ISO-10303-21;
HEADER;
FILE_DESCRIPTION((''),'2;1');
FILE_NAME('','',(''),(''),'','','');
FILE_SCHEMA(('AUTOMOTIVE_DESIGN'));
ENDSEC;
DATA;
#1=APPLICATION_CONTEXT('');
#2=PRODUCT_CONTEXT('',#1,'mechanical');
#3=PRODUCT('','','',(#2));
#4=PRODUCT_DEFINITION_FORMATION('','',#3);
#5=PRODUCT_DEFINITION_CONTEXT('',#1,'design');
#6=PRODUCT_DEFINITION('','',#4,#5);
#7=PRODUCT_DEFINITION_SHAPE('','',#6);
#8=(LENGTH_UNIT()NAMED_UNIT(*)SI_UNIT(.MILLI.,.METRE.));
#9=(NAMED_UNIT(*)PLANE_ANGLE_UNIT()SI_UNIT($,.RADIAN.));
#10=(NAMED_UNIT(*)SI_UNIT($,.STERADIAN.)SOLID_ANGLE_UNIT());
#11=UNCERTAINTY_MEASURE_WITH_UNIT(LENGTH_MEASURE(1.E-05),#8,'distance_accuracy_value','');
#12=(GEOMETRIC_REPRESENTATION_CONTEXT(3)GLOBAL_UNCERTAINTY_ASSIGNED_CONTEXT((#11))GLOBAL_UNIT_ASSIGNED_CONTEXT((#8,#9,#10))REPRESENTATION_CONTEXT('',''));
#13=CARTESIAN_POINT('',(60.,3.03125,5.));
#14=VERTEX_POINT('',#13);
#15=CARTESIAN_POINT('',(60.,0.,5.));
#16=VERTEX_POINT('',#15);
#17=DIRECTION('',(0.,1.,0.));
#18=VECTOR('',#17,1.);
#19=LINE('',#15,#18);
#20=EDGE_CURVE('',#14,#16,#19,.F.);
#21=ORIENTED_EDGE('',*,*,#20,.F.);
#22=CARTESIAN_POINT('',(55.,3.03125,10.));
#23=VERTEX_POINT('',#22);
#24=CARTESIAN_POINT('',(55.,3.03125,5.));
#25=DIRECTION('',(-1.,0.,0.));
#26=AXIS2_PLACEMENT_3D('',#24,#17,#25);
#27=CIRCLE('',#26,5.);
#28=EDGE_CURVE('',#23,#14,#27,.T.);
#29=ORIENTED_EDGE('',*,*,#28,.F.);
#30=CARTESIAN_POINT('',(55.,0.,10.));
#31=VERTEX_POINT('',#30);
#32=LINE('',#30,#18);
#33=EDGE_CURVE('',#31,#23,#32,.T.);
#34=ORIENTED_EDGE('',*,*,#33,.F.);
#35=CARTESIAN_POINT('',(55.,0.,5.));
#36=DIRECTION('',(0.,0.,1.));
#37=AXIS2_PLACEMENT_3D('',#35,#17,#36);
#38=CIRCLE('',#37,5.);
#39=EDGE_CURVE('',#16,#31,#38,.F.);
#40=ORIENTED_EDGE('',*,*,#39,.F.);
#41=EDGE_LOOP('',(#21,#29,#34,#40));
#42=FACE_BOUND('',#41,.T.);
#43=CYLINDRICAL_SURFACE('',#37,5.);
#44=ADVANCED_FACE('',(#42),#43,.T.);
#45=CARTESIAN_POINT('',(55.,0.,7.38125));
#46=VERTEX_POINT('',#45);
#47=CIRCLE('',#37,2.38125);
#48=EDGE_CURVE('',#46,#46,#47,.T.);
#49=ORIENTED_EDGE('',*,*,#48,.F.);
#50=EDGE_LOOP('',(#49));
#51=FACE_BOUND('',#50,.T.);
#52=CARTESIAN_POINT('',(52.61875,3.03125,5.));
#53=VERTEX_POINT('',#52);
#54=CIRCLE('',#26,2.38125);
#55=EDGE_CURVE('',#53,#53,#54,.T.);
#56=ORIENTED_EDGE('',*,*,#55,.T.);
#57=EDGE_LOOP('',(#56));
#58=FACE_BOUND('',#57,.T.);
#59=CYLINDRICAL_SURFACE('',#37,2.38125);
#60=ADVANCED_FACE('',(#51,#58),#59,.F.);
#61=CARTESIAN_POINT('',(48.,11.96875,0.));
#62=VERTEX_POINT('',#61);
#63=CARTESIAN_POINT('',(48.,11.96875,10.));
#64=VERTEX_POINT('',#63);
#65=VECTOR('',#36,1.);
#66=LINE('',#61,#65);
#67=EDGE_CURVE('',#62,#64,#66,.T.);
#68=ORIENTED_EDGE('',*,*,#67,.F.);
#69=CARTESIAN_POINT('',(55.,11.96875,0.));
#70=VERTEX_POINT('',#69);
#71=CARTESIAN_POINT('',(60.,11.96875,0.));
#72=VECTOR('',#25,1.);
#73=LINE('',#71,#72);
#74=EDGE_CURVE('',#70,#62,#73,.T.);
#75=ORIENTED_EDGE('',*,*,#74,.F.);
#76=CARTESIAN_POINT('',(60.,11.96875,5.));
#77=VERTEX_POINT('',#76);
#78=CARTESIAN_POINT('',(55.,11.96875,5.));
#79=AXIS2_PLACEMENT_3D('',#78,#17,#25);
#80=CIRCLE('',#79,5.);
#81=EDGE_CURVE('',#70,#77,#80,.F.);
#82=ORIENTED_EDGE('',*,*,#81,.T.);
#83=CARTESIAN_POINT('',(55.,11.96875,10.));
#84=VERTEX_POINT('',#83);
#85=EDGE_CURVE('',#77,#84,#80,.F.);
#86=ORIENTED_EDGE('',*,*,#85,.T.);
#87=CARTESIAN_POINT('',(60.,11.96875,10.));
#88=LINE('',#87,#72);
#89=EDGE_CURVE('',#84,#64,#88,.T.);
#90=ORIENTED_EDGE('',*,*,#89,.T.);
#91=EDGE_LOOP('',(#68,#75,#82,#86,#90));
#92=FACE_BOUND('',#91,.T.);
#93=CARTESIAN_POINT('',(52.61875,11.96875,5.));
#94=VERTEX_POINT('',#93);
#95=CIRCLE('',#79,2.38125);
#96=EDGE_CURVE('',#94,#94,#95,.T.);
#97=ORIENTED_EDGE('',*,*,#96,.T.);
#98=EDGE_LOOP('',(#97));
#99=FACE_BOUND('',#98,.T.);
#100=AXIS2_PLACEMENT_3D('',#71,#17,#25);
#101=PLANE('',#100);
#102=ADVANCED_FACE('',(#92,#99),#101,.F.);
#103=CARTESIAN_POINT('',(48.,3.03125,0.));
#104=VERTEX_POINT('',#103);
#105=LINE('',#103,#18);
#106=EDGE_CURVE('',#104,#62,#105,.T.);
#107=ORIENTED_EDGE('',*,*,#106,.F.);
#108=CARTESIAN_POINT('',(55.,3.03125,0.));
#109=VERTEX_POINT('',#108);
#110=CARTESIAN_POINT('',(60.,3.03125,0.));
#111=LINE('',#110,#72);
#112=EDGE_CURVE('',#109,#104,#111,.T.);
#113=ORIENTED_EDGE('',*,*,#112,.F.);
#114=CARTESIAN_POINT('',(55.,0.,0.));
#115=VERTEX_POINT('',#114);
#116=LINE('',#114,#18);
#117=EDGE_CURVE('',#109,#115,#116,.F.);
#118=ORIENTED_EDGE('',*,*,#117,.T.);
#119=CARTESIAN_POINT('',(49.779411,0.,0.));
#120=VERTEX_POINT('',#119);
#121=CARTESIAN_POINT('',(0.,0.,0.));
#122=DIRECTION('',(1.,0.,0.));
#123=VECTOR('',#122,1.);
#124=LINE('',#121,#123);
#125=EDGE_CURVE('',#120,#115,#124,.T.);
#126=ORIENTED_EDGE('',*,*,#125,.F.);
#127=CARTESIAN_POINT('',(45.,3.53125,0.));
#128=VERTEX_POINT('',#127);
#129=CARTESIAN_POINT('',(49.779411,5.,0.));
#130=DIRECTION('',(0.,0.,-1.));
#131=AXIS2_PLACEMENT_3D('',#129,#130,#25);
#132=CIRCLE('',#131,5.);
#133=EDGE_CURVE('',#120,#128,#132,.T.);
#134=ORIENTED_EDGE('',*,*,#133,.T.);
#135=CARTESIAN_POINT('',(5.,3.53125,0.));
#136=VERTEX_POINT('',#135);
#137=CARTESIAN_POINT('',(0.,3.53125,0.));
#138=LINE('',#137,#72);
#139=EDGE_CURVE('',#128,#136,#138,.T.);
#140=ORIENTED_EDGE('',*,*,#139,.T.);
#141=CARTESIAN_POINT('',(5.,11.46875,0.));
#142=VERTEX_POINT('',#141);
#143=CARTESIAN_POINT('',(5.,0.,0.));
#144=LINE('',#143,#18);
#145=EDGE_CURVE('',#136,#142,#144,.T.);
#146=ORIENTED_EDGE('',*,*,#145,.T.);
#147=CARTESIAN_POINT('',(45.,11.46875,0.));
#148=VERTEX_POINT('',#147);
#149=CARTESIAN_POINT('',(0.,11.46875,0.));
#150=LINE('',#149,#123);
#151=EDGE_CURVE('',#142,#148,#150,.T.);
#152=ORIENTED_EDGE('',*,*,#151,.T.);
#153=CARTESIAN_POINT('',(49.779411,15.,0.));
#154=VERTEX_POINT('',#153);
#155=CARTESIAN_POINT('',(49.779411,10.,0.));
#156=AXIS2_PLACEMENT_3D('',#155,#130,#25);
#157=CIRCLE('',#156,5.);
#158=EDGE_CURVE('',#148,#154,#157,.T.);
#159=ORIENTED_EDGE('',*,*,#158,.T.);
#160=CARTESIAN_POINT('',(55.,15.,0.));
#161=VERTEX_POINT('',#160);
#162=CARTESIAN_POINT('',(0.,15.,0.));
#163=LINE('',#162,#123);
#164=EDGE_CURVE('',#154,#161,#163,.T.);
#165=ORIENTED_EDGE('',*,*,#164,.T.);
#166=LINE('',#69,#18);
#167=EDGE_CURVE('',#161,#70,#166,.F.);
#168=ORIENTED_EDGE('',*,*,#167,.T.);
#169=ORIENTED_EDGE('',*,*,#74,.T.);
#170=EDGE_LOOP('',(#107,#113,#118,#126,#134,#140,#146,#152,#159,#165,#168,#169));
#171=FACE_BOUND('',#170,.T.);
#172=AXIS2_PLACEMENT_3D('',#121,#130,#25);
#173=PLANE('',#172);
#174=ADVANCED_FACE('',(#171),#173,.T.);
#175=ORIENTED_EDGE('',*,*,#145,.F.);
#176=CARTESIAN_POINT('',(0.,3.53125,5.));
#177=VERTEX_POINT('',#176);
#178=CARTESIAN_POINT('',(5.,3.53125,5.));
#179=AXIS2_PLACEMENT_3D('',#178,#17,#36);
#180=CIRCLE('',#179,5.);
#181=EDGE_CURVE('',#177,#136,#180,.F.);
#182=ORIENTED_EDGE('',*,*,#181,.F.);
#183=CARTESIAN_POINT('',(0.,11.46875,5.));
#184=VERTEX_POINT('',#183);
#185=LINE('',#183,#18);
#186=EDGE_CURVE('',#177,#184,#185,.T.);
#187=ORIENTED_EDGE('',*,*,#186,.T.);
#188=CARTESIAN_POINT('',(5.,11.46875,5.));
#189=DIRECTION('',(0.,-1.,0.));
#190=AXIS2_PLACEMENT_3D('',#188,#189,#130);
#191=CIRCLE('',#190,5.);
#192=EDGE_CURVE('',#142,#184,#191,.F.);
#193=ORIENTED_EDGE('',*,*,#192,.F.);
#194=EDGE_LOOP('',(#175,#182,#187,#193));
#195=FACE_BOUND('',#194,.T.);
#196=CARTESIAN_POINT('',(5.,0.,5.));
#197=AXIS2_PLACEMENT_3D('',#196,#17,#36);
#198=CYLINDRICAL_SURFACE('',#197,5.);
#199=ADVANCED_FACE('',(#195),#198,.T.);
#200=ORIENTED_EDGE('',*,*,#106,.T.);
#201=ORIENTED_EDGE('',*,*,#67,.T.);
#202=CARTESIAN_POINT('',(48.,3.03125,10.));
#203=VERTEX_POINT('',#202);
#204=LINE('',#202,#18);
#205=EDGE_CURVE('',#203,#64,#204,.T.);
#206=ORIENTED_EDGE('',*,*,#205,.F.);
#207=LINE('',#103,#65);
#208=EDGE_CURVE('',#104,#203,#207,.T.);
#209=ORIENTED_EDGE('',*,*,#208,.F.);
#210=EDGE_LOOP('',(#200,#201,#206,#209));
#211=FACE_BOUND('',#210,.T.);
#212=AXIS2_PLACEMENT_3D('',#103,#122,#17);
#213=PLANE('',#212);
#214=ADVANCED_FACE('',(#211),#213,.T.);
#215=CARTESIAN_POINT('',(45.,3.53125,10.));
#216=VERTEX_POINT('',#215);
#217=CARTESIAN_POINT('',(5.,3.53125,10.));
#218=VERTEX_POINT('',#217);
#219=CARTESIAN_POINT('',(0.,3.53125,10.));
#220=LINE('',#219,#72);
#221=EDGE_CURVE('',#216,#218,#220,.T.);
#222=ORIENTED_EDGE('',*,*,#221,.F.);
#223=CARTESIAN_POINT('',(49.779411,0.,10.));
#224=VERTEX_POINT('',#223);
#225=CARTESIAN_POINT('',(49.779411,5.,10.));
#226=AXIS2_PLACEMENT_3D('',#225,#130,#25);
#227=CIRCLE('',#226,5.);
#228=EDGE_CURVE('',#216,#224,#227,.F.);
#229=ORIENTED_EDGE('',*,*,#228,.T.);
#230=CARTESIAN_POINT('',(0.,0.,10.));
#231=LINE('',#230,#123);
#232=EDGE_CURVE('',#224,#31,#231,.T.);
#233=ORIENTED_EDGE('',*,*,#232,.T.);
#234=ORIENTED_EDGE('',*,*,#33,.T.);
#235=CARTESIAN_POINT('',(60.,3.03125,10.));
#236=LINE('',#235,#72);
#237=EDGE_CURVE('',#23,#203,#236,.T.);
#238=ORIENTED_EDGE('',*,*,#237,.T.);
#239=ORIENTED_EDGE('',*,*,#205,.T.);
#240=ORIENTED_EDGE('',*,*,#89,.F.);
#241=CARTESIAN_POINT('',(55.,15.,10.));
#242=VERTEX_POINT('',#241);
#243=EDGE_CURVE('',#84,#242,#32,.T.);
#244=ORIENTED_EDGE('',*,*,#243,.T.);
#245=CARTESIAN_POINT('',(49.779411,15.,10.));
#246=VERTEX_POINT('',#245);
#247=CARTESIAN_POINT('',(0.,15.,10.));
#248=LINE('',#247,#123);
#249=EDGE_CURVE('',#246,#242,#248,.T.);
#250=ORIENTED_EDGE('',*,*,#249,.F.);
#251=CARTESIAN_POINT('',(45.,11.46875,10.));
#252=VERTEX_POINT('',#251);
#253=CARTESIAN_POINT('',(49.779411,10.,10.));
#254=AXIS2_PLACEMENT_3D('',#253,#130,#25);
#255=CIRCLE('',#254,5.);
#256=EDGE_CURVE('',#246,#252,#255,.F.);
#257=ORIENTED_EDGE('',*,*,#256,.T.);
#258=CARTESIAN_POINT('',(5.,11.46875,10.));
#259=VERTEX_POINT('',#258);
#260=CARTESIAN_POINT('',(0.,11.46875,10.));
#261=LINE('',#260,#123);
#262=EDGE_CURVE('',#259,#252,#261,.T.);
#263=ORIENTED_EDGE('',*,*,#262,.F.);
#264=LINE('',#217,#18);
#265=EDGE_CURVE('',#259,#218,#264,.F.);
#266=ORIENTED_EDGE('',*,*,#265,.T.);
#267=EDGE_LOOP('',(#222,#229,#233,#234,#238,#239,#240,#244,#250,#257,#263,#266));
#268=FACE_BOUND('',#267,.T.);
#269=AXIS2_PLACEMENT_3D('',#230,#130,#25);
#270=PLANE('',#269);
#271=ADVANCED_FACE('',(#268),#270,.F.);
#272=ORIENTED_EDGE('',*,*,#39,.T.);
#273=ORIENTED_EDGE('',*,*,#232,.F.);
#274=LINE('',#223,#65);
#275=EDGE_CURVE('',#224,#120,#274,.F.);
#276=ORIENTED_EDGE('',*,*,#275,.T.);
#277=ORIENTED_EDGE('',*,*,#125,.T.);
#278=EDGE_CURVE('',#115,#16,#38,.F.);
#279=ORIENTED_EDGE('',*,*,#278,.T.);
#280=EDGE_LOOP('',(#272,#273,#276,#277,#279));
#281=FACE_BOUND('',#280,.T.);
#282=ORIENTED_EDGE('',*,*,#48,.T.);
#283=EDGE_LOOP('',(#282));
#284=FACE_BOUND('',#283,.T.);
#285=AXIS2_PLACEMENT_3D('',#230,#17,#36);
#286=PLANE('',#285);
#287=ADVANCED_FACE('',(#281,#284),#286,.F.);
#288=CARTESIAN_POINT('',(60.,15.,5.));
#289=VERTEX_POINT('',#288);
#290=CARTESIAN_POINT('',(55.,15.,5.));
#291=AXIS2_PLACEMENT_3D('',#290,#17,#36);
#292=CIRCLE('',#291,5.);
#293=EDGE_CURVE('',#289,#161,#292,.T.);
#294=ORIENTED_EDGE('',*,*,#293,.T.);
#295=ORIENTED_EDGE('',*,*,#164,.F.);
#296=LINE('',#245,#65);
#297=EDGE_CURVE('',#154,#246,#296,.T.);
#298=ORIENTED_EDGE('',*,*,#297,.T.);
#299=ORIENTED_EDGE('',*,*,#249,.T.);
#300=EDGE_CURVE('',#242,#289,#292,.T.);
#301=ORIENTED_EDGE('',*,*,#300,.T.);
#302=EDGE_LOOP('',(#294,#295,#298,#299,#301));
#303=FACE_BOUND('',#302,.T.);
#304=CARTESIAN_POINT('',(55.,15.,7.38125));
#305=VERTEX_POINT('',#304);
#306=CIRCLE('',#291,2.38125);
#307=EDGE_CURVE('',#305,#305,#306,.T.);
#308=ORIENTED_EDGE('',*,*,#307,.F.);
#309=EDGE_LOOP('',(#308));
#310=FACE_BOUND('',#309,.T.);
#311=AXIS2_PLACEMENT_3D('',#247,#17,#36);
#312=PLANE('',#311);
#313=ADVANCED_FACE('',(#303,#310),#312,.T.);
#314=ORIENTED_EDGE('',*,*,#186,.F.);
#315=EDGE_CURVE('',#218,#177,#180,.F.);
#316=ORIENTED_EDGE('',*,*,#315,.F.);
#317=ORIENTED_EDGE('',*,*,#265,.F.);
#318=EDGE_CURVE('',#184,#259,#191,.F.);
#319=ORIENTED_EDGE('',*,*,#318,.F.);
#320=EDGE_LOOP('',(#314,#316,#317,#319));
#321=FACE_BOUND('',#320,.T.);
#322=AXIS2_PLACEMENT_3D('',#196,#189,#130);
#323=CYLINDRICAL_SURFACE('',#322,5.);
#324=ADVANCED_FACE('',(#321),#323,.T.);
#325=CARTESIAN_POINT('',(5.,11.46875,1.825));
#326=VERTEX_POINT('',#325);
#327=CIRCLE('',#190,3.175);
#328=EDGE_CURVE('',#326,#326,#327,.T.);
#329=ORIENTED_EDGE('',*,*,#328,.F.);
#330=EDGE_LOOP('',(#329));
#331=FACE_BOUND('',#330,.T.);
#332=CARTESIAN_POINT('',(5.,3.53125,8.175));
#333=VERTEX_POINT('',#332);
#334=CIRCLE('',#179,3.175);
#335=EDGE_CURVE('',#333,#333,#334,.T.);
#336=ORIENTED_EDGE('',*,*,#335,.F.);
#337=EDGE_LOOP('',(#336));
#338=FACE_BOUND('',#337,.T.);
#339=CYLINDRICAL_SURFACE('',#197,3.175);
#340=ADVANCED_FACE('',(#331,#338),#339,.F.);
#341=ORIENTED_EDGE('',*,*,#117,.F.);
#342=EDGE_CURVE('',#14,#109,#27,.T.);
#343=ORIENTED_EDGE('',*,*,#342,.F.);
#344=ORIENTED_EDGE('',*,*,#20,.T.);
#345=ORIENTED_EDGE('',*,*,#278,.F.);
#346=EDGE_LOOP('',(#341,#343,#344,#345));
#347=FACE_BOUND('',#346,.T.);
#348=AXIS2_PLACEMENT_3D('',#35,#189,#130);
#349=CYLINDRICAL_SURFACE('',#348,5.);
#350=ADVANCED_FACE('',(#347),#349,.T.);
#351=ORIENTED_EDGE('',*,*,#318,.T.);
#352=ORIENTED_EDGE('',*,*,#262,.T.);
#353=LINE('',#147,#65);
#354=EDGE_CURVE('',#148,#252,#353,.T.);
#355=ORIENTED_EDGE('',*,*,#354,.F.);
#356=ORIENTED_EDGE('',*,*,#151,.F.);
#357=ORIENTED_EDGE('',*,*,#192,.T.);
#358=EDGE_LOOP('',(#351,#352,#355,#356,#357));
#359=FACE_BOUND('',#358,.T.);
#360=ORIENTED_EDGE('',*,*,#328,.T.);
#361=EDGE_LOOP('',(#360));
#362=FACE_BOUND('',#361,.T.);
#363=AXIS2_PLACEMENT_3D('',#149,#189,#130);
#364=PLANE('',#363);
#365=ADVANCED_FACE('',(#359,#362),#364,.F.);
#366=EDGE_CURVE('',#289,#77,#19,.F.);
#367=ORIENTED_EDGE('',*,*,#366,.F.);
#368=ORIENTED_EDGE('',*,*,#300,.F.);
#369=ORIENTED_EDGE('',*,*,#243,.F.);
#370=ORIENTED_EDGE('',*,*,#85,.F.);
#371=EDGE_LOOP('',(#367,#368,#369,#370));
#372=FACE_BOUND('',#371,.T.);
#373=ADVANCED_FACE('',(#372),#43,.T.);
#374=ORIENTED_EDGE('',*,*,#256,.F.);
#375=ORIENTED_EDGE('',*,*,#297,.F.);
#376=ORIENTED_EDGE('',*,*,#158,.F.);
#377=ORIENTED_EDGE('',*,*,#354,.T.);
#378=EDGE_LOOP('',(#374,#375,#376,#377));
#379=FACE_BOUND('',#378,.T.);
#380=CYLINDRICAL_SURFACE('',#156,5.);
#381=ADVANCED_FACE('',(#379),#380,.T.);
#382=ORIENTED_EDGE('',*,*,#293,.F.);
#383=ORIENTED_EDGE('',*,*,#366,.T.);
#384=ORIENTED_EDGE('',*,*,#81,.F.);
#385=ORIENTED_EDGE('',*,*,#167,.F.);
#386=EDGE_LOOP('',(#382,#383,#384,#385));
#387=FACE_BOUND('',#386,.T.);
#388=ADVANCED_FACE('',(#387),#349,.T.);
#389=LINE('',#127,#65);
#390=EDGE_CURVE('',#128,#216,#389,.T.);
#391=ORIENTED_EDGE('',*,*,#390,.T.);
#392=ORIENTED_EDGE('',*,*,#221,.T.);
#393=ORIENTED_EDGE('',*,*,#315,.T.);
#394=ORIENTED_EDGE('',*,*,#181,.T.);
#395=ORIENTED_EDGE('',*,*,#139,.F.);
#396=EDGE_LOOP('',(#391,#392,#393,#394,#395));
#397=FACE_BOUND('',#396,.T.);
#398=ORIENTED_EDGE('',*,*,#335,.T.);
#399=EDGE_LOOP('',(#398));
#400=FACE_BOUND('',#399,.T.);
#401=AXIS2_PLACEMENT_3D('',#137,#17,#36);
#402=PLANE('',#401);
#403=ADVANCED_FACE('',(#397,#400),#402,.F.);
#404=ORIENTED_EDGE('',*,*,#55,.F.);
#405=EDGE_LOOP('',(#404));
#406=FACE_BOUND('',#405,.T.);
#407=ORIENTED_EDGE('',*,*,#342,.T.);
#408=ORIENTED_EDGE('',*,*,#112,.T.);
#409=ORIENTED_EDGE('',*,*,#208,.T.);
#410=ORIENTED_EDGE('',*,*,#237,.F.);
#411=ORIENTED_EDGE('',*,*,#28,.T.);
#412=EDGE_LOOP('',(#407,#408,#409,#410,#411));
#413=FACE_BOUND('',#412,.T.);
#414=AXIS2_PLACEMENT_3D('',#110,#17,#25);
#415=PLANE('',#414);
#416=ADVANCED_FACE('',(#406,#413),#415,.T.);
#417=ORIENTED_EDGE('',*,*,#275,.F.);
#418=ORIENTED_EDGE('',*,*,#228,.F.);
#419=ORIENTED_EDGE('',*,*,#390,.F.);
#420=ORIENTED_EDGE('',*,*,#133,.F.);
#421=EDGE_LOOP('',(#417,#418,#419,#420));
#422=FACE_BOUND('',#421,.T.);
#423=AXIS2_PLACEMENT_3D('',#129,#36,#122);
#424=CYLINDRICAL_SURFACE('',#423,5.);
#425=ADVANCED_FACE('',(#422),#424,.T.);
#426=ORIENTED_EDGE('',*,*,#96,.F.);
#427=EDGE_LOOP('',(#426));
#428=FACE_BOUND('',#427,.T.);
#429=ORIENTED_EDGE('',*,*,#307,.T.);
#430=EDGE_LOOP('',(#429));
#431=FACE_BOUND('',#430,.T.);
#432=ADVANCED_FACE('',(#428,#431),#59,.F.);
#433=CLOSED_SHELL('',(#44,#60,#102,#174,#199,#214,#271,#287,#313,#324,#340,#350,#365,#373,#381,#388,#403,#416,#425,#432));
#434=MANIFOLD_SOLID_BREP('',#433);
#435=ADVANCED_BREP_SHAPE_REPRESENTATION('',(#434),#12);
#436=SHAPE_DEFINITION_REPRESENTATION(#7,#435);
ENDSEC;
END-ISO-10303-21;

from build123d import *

# Parameters (mm, degrees)
SKETCH1_W           = 60
SKETCH1_H           = 15
BOSS_EXTRUDE1_DEPTH = 10
SKETCH2_W           = 12
SKETCH2_H           = 8.9375
CUT_EXTRUDE1_DEPTH  = 63.649820431
SKETCH4_W           = 45
SKETCH4_H           = 3.53125
CUT_EXTRUDE3_DEPTH  = 63.649820431
FILLET1_R           = 5
FILLET2_R           = 5
SKETCH3_R           = 3.175
SKETCH3_R_2         = 2.38125
CUT_EXTRUDE2_DEPTH  = 63.649820431


# Some blends are built 0.0001 mm under size
with BuildPart() as part:
    # Sketch1 → Boss-Extrude1 (new body)
    with BuildSketch(Plane.XY):
        with Locations((30, 7.5)):
            Rectangle(SKETCH1_W, SKETCH1_H)
    extrude(amount=BOSS_EXTRUDE1_DEPTH)

    # Sketch2 → Cut-Extrude1 (cut, through all)
    with BuildSketch(Plane.XY.offset(10)):
        with Locations((54, 7.5)):
            Rectangle(SKETCH2_W, SKETCH2_H)
    extrude(amount=-CUT_EXTRUDE1_DEPTH, mode=Mode.SUBTRACT)

    # Sketch4 → Cut-Extrude3 (cut, through all)
    with BuildSketch(Plane.XY.offset(10)):
        with Locations((22.5, 13.234375)):
            Rectangle(SKETCH4_W, SKETCH4_H)
        with Locations((22.5, 1.765625)):
            Rectangle(SKETCH4_W, SKETCH4_H)
    extrude(amount=-CUT_EXTRUDE3_DEPTH, mode=Mode.SUBTRACT)

    # Fillet1
    fillet1_edges = [part.edges().sort_by_distance(p)[0] for p in [
        (60, 1.515625, 0),
        (60, 1.515625, 10),
        (60, 13.484375, 0),
        (60, 13.484375, 10),
        (0, 7.5, 0),
        (0, 7.5, 10),
    ]]
    fillet(fillet1_edges, radius=FILLET1_R - 0.0001)  # a hair under: the kernel refuses the full size

    # Fillet2
    # the kernel refuses this fillet: 5 mm, written as the material it takes off along each edge
    with BuildSketch(Plane(origin=(45, 0, 21.948528528), x_dir=(1, 0, 0), z_dir=(0, 0, -1))) as fillet2_piece_1:
        with BuildLine():
            CenterArc((4.779411411, -5), FILLET2_R, 90, 72.917402966)
            Line((0, -3.53125), (-0.095588228, -3.501875))
            ThreePointArc((-0.095588228, -3.501875), (-0.1, -1.765625), (-0.1, 0))
            Line((-0.1, 0), (0, 0.1))
            Line((0, 0.1), (4.779411411, 0.1))
            Line((4.779411411, 0.1), (4.779411411, 0))
        make_face()
    extrude(amount=33.897057056, mode=Mode.SUBTRACT)
    with BuildSketch(Plane(origin=(45, 15, 21.948528528), x_dir=(0, -1, 0), z_dir=(0, 0, -1))) as fillet2_piece_2:
        with BuildLine():
            CenterArc((5, -4.779411411), FILLET2_R, 107.082597034, 72.917402966)
            Line((0, -4.779411411), (-0.1, -4.779411411))
            Line((-0.1, -4.779411411), (-0.1, 0))
            Line((-0.1, 0), (0, 0.1))
            ThreePointArc((0, 0.1), (1.765625, 0.1), (3.501875, 0.095588228))
            Line((3.501875, 0.095588228), (3.53125, 0))
        make_face()
    extrude(amount=33.897057056, mode=Mode.SUBTRACT)

    # Sketch3 → Cut-Extrude2 (cut, through all)
    with BuildSketch(Plane(origin=(0, 15, 0), x_dir=(1, 0, 0), z_dir=(0, 1, 0))):
        with Locations(Location((5, -5, 0), (0, 0, 270))):
            Circle(SKETCH3_R)
        with Locations(Location((55, -5, 0), (0, 0, 270))):
            Circle(SKETCH3_R_2)
    extrude(amount=-CUT_EXTRUDE2_DEPTH, mode=Mode.SUBTRACT)


solid = part.part
